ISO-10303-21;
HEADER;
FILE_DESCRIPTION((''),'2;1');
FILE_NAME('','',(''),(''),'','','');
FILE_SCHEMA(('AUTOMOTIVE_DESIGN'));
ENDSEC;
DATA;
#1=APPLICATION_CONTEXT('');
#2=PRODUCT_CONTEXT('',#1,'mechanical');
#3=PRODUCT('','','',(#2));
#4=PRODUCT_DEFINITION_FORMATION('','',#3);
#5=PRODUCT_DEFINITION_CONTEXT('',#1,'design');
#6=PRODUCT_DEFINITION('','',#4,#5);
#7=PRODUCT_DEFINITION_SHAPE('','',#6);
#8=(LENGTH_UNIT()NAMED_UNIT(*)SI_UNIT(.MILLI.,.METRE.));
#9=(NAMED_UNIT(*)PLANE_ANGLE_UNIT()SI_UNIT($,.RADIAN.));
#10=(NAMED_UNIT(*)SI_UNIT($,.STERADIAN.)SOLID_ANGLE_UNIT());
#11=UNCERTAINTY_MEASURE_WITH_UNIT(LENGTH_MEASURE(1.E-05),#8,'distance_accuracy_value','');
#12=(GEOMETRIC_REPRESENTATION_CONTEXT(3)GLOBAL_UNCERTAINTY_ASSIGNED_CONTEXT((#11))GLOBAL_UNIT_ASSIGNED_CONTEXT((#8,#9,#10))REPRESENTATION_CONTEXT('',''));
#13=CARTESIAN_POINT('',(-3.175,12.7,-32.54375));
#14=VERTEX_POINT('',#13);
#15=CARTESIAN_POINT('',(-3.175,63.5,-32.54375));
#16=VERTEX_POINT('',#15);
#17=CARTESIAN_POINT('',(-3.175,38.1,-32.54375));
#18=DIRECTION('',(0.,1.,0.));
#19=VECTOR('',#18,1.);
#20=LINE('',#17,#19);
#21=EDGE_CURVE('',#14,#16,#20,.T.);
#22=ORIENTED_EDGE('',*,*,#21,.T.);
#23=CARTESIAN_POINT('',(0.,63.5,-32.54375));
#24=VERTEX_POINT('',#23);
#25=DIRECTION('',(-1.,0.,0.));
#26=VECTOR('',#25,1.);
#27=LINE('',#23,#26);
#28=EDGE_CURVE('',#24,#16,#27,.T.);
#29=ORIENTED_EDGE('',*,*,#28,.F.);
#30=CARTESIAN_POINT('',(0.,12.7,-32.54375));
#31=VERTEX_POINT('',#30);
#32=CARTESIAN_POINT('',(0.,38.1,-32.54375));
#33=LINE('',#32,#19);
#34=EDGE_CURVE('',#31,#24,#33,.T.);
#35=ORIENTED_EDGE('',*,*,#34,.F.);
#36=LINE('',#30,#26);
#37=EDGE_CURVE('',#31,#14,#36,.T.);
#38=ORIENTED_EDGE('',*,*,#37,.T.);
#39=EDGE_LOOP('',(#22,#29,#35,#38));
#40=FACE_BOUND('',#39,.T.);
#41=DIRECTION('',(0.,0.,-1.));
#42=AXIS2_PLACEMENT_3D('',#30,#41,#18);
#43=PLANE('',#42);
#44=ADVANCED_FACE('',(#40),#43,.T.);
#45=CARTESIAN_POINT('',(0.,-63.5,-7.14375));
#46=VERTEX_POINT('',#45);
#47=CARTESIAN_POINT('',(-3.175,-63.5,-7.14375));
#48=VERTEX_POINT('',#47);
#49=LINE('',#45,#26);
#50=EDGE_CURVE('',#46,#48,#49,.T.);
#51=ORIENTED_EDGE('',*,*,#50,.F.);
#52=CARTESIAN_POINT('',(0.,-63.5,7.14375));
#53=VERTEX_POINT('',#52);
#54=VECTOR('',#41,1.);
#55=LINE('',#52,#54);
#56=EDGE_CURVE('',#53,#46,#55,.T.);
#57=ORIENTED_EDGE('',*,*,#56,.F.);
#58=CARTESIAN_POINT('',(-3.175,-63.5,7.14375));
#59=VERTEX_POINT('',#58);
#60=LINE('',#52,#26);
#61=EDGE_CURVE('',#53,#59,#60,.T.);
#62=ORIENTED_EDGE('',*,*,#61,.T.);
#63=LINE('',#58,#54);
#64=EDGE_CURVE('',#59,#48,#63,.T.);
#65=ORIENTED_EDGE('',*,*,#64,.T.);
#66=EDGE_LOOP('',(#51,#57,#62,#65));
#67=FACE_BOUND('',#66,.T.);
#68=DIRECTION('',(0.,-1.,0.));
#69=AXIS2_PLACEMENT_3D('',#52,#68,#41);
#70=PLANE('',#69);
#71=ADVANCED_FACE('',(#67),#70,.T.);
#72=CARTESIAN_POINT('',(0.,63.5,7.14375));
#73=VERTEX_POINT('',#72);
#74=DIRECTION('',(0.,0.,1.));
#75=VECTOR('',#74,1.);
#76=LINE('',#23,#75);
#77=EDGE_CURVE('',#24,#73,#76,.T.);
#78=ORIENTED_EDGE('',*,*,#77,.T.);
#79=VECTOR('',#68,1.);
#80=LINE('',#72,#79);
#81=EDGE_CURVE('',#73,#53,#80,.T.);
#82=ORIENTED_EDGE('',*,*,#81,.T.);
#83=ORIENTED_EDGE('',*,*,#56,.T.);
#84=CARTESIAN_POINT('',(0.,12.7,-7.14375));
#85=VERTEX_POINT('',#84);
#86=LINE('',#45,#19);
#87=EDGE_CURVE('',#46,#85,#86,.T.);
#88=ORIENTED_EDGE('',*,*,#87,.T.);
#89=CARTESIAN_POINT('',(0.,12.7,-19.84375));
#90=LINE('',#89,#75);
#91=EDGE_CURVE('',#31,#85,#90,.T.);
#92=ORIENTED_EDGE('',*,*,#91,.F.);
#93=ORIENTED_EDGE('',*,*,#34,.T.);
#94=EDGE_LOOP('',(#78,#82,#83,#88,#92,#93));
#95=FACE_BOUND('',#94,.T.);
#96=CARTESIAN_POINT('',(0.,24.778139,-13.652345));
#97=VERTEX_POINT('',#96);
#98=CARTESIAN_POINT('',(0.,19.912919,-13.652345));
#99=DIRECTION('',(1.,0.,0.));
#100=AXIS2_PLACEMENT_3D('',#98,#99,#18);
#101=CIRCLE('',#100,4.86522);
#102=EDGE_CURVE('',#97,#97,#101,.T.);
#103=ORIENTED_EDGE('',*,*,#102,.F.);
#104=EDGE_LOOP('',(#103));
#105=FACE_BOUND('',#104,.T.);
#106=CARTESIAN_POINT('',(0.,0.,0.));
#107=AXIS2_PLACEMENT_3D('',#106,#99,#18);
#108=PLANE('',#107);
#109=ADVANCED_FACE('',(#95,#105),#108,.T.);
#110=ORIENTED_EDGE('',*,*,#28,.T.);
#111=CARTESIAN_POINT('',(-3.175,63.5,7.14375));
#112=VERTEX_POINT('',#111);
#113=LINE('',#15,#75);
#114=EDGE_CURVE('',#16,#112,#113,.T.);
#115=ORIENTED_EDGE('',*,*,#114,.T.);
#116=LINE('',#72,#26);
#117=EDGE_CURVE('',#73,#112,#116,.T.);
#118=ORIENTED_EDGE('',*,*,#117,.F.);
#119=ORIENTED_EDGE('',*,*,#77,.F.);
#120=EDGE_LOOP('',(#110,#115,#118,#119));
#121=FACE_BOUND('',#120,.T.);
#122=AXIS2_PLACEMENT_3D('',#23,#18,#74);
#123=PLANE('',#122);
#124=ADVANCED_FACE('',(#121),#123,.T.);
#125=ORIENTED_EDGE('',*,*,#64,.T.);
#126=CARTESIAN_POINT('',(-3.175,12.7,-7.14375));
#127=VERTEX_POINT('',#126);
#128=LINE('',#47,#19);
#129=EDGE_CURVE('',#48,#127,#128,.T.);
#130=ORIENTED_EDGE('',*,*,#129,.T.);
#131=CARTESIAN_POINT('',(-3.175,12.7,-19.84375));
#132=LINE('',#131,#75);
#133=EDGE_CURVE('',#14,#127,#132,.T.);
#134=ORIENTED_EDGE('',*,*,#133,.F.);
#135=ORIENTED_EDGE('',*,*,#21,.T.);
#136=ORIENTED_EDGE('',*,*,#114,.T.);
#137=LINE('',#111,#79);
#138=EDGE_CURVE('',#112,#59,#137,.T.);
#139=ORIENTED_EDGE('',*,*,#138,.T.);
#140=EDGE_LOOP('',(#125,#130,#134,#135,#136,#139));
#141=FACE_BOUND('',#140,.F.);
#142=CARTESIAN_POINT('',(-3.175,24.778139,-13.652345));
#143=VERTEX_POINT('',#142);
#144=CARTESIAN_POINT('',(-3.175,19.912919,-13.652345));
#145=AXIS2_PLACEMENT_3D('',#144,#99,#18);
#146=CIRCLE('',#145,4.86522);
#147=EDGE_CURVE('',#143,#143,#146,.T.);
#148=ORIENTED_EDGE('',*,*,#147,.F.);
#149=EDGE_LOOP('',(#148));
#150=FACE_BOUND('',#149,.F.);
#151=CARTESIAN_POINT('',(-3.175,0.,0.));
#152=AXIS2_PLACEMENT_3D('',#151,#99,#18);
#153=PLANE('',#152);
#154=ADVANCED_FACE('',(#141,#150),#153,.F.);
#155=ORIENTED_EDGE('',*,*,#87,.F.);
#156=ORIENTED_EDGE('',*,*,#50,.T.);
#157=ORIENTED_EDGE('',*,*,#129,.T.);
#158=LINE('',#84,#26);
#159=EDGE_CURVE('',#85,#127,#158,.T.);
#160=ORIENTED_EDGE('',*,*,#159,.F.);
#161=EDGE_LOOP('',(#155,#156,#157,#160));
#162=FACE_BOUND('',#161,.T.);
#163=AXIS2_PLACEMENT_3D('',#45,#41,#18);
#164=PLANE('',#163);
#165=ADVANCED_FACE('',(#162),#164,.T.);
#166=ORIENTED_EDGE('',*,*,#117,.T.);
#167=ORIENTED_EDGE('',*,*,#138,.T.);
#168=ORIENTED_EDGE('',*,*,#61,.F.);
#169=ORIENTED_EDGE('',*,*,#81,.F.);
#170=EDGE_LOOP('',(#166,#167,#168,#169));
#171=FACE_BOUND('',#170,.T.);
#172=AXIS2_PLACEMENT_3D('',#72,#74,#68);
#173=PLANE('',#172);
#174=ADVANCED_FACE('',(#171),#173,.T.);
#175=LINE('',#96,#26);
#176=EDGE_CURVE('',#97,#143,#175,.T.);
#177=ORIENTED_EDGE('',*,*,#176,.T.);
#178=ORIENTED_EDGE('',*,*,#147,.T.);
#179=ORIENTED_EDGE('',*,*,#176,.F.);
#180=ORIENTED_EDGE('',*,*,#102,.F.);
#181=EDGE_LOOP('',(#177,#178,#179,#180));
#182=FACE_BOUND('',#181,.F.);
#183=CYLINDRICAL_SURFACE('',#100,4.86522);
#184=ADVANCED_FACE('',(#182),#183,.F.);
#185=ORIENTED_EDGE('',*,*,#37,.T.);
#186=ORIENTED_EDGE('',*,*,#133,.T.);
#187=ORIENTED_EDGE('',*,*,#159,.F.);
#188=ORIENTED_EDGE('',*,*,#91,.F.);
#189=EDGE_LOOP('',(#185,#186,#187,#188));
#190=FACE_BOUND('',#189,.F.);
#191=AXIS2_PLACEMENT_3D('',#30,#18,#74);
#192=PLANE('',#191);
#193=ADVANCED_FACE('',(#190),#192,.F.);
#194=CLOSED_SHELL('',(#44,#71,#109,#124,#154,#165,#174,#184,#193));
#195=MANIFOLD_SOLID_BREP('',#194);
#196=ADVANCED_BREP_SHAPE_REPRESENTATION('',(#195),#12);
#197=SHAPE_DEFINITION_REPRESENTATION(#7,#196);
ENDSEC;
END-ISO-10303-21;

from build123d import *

# Parameters (mm, degrees)
F1_W     = 50.8
F1_H     = 25.4
F1_R     = 4.8652202412
F2_DEPTH = 3.175


# Not quite as in the source:
# - a variable given as a bare number and used for a length is read in inches; the dataset says mm whatever the document's units were


with BuildPart() as f2:
    # F1 (on Right) → F2 (new body)
    with BuildSketch(Plane.YZ):
        Polygon((63.5, 7.14375), (-63.5, 7.14375), (-63.5, -7.14375), (12.7, -7.14375), (63.5, -7.14375), align=None)
        with Locations((38.1, -19.84375)):
            Rectangle(F1_W, F1_H)
        with Locations((19.9129190296, -13.6523451656)):
            Circle(F1_R, mode=Mode.SUBTRACT)
    extrude(amount=-F2_DEPTH)


solid = f2.part
